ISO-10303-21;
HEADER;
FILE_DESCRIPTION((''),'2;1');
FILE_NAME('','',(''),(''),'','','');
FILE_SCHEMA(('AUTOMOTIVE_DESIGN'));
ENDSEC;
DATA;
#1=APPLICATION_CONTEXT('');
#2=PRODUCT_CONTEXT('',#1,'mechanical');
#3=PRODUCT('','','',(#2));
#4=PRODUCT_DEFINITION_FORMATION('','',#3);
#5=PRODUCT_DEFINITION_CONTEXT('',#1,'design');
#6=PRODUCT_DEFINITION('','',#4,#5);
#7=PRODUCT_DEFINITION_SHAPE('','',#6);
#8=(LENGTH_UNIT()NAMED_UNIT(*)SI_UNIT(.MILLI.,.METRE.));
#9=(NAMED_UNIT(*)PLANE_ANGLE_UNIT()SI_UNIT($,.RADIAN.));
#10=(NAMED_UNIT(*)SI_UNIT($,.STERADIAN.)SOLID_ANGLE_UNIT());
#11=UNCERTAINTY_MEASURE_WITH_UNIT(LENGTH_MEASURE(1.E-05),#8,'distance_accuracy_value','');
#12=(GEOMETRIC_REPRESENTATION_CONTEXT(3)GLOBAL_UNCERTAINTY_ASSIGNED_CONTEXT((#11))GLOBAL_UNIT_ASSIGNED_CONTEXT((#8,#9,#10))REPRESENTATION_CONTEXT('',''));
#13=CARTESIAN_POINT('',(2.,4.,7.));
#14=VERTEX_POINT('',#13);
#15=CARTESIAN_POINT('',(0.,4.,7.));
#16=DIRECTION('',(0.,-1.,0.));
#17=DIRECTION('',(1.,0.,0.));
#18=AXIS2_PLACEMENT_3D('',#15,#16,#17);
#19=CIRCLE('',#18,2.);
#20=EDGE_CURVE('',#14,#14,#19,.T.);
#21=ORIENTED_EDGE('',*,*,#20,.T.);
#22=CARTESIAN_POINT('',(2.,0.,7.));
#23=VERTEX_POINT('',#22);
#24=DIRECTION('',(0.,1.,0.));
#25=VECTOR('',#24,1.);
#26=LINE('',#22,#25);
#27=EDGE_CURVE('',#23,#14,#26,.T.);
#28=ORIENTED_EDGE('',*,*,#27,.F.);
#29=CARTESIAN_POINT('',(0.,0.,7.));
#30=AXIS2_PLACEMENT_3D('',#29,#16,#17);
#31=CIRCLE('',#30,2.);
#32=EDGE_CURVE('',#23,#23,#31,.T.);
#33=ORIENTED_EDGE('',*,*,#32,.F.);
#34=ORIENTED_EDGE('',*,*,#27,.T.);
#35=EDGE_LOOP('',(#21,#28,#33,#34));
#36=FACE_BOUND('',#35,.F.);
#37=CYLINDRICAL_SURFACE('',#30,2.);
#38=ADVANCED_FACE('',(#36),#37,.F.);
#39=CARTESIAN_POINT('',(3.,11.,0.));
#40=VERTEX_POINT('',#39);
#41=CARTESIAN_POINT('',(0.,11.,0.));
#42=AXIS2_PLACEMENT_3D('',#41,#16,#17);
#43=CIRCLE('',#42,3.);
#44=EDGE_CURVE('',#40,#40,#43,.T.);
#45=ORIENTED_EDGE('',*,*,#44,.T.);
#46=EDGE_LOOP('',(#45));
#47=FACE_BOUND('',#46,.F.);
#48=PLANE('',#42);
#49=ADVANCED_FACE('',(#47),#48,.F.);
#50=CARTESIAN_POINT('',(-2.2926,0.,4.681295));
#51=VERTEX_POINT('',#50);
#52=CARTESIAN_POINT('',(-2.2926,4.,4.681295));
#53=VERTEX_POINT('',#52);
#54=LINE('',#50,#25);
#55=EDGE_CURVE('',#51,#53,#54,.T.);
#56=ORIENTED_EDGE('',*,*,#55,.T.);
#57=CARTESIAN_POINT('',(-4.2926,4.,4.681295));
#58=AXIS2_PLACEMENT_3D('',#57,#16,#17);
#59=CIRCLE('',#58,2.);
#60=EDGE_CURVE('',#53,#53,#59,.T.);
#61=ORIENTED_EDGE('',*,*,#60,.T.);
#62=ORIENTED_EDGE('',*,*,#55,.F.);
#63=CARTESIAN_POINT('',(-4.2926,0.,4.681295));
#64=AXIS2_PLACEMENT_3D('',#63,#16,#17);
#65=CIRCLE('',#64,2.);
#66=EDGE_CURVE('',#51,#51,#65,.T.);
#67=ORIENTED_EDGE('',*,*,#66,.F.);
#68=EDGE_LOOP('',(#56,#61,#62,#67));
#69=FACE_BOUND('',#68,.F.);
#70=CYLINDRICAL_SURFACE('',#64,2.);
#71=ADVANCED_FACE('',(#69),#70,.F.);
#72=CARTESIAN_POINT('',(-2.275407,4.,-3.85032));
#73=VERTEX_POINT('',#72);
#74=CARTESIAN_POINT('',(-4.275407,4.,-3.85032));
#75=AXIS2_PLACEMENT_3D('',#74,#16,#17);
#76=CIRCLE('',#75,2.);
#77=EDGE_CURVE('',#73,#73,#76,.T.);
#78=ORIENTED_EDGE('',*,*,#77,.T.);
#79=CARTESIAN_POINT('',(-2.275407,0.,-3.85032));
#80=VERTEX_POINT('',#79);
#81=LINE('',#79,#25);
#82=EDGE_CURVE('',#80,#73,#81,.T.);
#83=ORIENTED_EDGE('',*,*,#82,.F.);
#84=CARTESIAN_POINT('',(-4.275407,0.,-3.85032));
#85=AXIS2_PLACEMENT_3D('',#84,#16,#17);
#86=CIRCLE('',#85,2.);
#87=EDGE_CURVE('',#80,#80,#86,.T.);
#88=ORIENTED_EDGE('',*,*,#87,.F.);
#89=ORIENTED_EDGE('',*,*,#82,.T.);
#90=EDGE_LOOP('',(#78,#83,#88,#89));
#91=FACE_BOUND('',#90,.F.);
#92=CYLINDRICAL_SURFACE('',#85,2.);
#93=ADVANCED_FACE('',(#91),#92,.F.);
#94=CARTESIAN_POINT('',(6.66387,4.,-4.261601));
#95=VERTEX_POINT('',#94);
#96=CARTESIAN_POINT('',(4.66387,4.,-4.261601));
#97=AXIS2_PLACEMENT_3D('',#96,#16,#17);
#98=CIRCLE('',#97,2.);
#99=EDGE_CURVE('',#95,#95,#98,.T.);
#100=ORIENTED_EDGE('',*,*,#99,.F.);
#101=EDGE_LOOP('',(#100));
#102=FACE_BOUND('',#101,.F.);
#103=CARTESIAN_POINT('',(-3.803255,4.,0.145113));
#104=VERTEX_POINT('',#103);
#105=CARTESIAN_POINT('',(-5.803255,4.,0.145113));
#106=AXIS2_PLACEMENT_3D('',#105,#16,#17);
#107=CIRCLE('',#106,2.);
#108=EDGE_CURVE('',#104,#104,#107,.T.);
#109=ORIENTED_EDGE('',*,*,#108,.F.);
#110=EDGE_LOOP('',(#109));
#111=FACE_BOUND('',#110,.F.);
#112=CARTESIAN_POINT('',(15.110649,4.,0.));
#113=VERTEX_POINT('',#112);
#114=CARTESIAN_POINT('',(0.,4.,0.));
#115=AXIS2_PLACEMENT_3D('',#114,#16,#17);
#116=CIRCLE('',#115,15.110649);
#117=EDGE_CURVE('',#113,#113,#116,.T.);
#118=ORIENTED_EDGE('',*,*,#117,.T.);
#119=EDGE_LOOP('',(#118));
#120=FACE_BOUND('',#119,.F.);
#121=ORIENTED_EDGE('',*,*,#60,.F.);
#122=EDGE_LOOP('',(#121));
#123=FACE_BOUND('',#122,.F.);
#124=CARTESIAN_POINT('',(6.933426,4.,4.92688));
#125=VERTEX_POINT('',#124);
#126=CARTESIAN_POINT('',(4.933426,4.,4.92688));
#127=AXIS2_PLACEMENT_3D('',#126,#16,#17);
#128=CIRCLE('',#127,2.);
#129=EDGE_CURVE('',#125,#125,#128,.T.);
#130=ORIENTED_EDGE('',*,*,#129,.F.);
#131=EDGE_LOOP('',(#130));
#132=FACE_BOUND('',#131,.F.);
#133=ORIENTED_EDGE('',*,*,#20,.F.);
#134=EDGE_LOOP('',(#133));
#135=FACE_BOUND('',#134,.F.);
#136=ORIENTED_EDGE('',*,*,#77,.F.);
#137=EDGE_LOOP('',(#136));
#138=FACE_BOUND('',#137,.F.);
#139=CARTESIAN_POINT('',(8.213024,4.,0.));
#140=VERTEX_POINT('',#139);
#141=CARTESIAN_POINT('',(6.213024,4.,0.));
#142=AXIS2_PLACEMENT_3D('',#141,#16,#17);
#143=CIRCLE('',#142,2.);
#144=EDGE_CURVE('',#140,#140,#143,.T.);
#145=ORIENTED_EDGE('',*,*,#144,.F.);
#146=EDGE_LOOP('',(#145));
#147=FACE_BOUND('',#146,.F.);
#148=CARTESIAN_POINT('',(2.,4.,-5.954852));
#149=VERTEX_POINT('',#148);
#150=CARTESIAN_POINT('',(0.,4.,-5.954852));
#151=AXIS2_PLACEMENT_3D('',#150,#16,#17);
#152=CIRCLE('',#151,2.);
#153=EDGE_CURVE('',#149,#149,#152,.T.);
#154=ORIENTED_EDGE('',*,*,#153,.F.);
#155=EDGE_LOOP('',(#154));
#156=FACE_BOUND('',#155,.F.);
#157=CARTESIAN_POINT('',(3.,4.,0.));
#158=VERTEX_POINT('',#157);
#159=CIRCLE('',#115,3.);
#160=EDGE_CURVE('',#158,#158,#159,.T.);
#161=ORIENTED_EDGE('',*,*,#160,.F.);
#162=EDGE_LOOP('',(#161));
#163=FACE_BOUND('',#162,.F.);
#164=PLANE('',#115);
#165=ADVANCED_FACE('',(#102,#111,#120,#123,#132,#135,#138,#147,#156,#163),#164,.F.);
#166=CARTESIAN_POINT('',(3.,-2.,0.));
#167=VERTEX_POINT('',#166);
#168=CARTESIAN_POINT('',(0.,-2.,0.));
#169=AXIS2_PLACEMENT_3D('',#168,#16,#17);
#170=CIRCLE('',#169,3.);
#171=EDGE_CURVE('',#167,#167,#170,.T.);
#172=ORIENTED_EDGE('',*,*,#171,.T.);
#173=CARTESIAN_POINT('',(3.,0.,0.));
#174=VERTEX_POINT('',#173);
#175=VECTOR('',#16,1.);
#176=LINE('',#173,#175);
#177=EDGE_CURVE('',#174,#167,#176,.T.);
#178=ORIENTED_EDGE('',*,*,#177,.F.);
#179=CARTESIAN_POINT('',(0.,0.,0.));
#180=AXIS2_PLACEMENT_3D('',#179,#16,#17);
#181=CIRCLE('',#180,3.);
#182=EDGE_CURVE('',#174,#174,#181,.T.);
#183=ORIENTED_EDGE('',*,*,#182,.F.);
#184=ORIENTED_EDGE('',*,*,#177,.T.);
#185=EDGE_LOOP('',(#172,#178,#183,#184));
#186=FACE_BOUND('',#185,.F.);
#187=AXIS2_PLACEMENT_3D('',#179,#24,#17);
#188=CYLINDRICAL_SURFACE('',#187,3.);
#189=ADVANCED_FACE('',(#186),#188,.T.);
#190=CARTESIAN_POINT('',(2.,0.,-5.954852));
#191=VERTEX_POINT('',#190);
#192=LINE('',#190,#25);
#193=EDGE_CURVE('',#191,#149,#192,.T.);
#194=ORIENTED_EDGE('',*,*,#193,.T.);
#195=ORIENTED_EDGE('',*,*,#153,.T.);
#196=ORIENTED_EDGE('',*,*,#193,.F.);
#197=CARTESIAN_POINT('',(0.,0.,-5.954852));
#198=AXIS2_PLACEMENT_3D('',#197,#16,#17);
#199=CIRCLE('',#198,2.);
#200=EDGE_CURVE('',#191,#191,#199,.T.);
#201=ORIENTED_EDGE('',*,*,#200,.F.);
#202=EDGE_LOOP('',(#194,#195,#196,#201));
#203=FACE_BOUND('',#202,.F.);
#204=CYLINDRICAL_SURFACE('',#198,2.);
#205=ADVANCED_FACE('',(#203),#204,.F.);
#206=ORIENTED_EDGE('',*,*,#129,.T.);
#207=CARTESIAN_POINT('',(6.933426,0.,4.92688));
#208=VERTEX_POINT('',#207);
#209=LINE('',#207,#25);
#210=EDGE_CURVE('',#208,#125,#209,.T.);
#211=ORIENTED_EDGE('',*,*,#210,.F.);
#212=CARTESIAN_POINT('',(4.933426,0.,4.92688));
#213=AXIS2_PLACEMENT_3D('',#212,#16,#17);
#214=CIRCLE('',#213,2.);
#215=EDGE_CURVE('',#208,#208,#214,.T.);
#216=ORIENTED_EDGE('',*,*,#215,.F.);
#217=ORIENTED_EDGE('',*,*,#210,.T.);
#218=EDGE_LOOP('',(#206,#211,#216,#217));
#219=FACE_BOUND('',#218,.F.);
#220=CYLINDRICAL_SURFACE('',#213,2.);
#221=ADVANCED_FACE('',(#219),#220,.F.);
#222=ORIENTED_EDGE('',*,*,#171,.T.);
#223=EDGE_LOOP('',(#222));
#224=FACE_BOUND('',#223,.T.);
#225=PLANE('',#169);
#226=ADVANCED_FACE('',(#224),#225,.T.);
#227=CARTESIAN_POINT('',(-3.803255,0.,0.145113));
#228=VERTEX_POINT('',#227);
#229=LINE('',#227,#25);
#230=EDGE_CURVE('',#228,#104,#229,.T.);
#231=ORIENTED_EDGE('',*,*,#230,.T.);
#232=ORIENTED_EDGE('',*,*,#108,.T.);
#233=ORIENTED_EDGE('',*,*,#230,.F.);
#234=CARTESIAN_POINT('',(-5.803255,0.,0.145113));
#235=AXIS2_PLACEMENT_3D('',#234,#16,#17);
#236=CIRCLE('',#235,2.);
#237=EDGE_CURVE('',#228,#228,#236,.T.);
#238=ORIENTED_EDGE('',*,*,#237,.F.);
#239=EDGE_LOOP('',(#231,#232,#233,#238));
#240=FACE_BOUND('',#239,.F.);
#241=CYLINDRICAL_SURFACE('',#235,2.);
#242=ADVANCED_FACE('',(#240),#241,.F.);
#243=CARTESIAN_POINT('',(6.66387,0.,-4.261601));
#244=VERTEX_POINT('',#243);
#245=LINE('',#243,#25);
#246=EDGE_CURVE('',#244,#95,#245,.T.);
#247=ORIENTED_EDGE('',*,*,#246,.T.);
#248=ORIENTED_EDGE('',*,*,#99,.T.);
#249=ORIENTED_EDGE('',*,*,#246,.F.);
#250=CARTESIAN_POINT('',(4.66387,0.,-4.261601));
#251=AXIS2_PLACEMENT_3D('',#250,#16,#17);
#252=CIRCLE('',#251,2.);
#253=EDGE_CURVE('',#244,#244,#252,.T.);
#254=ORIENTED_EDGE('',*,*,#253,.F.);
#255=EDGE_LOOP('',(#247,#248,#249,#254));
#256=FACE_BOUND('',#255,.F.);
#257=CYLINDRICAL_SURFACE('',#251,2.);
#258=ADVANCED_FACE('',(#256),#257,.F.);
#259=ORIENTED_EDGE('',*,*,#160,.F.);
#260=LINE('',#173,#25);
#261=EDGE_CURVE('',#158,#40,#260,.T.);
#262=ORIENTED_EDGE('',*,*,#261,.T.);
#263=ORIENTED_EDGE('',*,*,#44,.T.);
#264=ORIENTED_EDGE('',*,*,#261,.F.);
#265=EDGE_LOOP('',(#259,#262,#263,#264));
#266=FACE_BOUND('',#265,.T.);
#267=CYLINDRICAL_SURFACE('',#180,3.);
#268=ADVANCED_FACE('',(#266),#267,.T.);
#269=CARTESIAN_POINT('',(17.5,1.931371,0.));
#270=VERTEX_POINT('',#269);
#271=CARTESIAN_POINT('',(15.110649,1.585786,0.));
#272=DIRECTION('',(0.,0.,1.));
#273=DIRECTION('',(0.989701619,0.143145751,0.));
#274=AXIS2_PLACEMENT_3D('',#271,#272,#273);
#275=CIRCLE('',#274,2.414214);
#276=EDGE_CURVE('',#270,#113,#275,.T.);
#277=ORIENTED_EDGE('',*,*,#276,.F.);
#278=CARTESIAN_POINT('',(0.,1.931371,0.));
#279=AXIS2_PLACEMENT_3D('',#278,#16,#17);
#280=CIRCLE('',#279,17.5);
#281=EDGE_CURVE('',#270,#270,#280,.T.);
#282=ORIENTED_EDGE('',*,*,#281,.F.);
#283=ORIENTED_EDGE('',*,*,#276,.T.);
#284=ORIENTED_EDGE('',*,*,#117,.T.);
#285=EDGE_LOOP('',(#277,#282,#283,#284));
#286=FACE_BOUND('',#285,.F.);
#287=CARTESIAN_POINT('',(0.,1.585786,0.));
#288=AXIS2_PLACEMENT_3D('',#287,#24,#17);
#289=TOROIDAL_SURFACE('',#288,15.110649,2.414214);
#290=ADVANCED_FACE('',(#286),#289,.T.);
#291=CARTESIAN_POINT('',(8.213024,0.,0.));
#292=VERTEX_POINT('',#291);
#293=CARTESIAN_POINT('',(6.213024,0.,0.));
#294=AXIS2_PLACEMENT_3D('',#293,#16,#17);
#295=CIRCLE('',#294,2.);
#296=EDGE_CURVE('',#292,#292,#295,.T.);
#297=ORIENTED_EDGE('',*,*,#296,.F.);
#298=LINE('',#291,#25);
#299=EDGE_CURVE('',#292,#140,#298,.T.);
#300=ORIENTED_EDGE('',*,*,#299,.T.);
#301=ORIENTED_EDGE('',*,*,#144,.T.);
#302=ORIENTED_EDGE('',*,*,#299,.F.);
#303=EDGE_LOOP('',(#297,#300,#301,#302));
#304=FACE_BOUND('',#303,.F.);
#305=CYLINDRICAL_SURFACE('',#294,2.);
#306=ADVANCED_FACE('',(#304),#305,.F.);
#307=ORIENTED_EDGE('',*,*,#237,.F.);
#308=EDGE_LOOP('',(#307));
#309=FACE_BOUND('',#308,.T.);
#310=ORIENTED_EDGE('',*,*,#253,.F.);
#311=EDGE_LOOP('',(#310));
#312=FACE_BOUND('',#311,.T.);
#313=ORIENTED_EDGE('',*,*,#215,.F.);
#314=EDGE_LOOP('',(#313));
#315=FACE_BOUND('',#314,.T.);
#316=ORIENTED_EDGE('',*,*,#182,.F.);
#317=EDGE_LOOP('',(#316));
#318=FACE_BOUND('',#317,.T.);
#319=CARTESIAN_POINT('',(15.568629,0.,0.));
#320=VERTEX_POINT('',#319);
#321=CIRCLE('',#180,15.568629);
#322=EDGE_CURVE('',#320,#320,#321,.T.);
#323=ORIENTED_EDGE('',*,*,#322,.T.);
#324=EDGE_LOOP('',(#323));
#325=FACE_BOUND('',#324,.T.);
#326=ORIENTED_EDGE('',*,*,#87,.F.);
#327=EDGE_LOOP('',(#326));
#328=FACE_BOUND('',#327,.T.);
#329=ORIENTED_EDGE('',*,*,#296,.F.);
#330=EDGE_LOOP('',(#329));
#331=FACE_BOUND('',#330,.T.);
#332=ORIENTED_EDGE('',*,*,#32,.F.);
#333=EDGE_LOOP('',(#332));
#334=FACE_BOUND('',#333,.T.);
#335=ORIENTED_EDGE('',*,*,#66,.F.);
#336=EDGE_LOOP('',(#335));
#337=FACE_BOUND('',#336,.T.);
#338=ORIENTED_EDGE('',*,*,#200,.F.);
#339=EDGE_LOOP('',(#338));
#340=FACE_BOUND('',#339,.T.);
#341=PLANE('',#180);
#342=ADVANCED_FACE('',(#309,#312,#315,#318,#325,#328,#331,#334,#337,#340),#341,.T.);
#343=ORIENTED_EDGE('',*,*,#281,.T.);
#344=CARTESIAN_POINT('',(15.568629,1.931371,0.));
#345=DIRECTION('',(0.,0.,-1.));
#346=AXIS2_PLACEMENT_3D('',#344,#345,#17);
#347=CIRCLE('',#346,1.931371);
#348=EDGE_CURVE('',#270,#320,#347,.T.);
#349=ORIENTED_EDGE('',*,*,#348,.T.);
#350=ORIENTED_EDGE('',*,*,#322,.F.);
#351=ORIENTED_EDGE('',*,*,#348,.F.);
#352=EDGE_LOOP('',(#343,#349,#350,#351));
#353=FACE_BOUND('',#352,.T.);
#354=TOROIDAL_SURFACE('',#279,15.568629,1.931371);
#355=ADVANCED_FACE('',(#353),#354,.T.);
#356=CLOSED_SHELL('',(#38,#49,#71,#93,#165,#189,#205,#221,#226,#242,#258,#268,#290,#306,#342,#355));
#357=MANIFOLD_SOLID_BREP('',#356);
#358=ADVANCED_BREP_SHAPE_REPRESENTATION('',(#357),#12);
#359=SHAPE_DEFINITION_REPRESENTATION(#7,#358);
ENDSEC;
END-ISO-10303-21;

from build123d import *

# Parameters (mm, degrees)
F0_R     = 3
F1_DEPTH = 11
F3_DEPTH = 2
F2_R     = 17.5
F4_DEPTH = 4
F5_R     = 1.9313708499
F7_R     = 2
F8_DEPTH = 6.5


# Not quite as in the source:
# - a fillet or chamfer that OpenCascade refuses, or shapes differently, is made with other operations: its cross-section is extruded or revolved along the edge and cut away or added


with BuildPart() as f1:
    # F0 (on Front) → F1 (new body)
    with BuildSketch(Plane.XZ):
        Circle(F0_R)
    extrude(amount=-F1_DEPTH)

    # F0 (on Front) → F3 (join)
    with BuildSketch(Plane.XZ):
        Circle(F0_R)
    extrude(amount=F3_DEPTH)

    # F2 (on Front) → F4 (join)
    with BuildSketch(Plane.XZ):
        Circle(F2_R)
    extrude(amount=-F4_DEPTH)

    # F5
    f5_edges = [f1.edges().sort_by_distance(p)[0] for p in [
        (-17.5, 0, 0),
    ]]
    fillet(f5_edges, radius=F5_R)

    # F6: fillet of radius 2.4142135624 on 1 edges, made by hand

    # F6_s1 → F6_t2 (revolve, cut)
    with BuildSketch(Plane.XY):
        with BuildLine():
            ThreePointArc((17.5, 1.9313708499), (16.6908565976, 3.4109907686), (15.1106489294, 4))
            Line((15.1106489294, 4), (15.1106489294, 4.0482842712))
            Line((15.1106489294, 4.0482842712), (17.5, 4.0482842712))
            Line((17.5, 4.0482842712), (17.5482842712, 4))
            ThreePointArc((17.5482842712, 4), (17.5482842712, 2.9656854249), (17.5477870214, 1.9382825381))
            Line((17.5477870214, 1.9382825381), (17.5, 1.9313708499))
        make_face()
    revolve(axis=Axis((0, 4, 0), (0, -1, 0)), mode=Mode.SUBTRACT)

    # F7 (on face) → F8 (cut)
    with BuildSketch(Plane.XZ):
        with Locations((0, -5.9548519258)):
            Circle(F7_R)
        with Locations((6.2130242586, 0)):
            Circle(F7_R)
        with Locations((4.9334257519, 4.926879719)):
            Circle(F7_R)
        with Locations((0, 7)):
            Circle(F7_R)
        with Locations((4.6638702957, -4.2616006167)):
            Circle(F7_R)
        with Locations((-4.2754073071, -3.8503200899)):
            Circle(F7_R)
        with Locations((-4.2925996605, 4.681295439)):
            Circle(F7_R)
        with Locations((-5.8032550169, 0.1451130412)):
            Circle(F7_R)
    extrude(amount=-F8_DEPTH, mode=Mode.SUBTRACT)


solid = f1.part
